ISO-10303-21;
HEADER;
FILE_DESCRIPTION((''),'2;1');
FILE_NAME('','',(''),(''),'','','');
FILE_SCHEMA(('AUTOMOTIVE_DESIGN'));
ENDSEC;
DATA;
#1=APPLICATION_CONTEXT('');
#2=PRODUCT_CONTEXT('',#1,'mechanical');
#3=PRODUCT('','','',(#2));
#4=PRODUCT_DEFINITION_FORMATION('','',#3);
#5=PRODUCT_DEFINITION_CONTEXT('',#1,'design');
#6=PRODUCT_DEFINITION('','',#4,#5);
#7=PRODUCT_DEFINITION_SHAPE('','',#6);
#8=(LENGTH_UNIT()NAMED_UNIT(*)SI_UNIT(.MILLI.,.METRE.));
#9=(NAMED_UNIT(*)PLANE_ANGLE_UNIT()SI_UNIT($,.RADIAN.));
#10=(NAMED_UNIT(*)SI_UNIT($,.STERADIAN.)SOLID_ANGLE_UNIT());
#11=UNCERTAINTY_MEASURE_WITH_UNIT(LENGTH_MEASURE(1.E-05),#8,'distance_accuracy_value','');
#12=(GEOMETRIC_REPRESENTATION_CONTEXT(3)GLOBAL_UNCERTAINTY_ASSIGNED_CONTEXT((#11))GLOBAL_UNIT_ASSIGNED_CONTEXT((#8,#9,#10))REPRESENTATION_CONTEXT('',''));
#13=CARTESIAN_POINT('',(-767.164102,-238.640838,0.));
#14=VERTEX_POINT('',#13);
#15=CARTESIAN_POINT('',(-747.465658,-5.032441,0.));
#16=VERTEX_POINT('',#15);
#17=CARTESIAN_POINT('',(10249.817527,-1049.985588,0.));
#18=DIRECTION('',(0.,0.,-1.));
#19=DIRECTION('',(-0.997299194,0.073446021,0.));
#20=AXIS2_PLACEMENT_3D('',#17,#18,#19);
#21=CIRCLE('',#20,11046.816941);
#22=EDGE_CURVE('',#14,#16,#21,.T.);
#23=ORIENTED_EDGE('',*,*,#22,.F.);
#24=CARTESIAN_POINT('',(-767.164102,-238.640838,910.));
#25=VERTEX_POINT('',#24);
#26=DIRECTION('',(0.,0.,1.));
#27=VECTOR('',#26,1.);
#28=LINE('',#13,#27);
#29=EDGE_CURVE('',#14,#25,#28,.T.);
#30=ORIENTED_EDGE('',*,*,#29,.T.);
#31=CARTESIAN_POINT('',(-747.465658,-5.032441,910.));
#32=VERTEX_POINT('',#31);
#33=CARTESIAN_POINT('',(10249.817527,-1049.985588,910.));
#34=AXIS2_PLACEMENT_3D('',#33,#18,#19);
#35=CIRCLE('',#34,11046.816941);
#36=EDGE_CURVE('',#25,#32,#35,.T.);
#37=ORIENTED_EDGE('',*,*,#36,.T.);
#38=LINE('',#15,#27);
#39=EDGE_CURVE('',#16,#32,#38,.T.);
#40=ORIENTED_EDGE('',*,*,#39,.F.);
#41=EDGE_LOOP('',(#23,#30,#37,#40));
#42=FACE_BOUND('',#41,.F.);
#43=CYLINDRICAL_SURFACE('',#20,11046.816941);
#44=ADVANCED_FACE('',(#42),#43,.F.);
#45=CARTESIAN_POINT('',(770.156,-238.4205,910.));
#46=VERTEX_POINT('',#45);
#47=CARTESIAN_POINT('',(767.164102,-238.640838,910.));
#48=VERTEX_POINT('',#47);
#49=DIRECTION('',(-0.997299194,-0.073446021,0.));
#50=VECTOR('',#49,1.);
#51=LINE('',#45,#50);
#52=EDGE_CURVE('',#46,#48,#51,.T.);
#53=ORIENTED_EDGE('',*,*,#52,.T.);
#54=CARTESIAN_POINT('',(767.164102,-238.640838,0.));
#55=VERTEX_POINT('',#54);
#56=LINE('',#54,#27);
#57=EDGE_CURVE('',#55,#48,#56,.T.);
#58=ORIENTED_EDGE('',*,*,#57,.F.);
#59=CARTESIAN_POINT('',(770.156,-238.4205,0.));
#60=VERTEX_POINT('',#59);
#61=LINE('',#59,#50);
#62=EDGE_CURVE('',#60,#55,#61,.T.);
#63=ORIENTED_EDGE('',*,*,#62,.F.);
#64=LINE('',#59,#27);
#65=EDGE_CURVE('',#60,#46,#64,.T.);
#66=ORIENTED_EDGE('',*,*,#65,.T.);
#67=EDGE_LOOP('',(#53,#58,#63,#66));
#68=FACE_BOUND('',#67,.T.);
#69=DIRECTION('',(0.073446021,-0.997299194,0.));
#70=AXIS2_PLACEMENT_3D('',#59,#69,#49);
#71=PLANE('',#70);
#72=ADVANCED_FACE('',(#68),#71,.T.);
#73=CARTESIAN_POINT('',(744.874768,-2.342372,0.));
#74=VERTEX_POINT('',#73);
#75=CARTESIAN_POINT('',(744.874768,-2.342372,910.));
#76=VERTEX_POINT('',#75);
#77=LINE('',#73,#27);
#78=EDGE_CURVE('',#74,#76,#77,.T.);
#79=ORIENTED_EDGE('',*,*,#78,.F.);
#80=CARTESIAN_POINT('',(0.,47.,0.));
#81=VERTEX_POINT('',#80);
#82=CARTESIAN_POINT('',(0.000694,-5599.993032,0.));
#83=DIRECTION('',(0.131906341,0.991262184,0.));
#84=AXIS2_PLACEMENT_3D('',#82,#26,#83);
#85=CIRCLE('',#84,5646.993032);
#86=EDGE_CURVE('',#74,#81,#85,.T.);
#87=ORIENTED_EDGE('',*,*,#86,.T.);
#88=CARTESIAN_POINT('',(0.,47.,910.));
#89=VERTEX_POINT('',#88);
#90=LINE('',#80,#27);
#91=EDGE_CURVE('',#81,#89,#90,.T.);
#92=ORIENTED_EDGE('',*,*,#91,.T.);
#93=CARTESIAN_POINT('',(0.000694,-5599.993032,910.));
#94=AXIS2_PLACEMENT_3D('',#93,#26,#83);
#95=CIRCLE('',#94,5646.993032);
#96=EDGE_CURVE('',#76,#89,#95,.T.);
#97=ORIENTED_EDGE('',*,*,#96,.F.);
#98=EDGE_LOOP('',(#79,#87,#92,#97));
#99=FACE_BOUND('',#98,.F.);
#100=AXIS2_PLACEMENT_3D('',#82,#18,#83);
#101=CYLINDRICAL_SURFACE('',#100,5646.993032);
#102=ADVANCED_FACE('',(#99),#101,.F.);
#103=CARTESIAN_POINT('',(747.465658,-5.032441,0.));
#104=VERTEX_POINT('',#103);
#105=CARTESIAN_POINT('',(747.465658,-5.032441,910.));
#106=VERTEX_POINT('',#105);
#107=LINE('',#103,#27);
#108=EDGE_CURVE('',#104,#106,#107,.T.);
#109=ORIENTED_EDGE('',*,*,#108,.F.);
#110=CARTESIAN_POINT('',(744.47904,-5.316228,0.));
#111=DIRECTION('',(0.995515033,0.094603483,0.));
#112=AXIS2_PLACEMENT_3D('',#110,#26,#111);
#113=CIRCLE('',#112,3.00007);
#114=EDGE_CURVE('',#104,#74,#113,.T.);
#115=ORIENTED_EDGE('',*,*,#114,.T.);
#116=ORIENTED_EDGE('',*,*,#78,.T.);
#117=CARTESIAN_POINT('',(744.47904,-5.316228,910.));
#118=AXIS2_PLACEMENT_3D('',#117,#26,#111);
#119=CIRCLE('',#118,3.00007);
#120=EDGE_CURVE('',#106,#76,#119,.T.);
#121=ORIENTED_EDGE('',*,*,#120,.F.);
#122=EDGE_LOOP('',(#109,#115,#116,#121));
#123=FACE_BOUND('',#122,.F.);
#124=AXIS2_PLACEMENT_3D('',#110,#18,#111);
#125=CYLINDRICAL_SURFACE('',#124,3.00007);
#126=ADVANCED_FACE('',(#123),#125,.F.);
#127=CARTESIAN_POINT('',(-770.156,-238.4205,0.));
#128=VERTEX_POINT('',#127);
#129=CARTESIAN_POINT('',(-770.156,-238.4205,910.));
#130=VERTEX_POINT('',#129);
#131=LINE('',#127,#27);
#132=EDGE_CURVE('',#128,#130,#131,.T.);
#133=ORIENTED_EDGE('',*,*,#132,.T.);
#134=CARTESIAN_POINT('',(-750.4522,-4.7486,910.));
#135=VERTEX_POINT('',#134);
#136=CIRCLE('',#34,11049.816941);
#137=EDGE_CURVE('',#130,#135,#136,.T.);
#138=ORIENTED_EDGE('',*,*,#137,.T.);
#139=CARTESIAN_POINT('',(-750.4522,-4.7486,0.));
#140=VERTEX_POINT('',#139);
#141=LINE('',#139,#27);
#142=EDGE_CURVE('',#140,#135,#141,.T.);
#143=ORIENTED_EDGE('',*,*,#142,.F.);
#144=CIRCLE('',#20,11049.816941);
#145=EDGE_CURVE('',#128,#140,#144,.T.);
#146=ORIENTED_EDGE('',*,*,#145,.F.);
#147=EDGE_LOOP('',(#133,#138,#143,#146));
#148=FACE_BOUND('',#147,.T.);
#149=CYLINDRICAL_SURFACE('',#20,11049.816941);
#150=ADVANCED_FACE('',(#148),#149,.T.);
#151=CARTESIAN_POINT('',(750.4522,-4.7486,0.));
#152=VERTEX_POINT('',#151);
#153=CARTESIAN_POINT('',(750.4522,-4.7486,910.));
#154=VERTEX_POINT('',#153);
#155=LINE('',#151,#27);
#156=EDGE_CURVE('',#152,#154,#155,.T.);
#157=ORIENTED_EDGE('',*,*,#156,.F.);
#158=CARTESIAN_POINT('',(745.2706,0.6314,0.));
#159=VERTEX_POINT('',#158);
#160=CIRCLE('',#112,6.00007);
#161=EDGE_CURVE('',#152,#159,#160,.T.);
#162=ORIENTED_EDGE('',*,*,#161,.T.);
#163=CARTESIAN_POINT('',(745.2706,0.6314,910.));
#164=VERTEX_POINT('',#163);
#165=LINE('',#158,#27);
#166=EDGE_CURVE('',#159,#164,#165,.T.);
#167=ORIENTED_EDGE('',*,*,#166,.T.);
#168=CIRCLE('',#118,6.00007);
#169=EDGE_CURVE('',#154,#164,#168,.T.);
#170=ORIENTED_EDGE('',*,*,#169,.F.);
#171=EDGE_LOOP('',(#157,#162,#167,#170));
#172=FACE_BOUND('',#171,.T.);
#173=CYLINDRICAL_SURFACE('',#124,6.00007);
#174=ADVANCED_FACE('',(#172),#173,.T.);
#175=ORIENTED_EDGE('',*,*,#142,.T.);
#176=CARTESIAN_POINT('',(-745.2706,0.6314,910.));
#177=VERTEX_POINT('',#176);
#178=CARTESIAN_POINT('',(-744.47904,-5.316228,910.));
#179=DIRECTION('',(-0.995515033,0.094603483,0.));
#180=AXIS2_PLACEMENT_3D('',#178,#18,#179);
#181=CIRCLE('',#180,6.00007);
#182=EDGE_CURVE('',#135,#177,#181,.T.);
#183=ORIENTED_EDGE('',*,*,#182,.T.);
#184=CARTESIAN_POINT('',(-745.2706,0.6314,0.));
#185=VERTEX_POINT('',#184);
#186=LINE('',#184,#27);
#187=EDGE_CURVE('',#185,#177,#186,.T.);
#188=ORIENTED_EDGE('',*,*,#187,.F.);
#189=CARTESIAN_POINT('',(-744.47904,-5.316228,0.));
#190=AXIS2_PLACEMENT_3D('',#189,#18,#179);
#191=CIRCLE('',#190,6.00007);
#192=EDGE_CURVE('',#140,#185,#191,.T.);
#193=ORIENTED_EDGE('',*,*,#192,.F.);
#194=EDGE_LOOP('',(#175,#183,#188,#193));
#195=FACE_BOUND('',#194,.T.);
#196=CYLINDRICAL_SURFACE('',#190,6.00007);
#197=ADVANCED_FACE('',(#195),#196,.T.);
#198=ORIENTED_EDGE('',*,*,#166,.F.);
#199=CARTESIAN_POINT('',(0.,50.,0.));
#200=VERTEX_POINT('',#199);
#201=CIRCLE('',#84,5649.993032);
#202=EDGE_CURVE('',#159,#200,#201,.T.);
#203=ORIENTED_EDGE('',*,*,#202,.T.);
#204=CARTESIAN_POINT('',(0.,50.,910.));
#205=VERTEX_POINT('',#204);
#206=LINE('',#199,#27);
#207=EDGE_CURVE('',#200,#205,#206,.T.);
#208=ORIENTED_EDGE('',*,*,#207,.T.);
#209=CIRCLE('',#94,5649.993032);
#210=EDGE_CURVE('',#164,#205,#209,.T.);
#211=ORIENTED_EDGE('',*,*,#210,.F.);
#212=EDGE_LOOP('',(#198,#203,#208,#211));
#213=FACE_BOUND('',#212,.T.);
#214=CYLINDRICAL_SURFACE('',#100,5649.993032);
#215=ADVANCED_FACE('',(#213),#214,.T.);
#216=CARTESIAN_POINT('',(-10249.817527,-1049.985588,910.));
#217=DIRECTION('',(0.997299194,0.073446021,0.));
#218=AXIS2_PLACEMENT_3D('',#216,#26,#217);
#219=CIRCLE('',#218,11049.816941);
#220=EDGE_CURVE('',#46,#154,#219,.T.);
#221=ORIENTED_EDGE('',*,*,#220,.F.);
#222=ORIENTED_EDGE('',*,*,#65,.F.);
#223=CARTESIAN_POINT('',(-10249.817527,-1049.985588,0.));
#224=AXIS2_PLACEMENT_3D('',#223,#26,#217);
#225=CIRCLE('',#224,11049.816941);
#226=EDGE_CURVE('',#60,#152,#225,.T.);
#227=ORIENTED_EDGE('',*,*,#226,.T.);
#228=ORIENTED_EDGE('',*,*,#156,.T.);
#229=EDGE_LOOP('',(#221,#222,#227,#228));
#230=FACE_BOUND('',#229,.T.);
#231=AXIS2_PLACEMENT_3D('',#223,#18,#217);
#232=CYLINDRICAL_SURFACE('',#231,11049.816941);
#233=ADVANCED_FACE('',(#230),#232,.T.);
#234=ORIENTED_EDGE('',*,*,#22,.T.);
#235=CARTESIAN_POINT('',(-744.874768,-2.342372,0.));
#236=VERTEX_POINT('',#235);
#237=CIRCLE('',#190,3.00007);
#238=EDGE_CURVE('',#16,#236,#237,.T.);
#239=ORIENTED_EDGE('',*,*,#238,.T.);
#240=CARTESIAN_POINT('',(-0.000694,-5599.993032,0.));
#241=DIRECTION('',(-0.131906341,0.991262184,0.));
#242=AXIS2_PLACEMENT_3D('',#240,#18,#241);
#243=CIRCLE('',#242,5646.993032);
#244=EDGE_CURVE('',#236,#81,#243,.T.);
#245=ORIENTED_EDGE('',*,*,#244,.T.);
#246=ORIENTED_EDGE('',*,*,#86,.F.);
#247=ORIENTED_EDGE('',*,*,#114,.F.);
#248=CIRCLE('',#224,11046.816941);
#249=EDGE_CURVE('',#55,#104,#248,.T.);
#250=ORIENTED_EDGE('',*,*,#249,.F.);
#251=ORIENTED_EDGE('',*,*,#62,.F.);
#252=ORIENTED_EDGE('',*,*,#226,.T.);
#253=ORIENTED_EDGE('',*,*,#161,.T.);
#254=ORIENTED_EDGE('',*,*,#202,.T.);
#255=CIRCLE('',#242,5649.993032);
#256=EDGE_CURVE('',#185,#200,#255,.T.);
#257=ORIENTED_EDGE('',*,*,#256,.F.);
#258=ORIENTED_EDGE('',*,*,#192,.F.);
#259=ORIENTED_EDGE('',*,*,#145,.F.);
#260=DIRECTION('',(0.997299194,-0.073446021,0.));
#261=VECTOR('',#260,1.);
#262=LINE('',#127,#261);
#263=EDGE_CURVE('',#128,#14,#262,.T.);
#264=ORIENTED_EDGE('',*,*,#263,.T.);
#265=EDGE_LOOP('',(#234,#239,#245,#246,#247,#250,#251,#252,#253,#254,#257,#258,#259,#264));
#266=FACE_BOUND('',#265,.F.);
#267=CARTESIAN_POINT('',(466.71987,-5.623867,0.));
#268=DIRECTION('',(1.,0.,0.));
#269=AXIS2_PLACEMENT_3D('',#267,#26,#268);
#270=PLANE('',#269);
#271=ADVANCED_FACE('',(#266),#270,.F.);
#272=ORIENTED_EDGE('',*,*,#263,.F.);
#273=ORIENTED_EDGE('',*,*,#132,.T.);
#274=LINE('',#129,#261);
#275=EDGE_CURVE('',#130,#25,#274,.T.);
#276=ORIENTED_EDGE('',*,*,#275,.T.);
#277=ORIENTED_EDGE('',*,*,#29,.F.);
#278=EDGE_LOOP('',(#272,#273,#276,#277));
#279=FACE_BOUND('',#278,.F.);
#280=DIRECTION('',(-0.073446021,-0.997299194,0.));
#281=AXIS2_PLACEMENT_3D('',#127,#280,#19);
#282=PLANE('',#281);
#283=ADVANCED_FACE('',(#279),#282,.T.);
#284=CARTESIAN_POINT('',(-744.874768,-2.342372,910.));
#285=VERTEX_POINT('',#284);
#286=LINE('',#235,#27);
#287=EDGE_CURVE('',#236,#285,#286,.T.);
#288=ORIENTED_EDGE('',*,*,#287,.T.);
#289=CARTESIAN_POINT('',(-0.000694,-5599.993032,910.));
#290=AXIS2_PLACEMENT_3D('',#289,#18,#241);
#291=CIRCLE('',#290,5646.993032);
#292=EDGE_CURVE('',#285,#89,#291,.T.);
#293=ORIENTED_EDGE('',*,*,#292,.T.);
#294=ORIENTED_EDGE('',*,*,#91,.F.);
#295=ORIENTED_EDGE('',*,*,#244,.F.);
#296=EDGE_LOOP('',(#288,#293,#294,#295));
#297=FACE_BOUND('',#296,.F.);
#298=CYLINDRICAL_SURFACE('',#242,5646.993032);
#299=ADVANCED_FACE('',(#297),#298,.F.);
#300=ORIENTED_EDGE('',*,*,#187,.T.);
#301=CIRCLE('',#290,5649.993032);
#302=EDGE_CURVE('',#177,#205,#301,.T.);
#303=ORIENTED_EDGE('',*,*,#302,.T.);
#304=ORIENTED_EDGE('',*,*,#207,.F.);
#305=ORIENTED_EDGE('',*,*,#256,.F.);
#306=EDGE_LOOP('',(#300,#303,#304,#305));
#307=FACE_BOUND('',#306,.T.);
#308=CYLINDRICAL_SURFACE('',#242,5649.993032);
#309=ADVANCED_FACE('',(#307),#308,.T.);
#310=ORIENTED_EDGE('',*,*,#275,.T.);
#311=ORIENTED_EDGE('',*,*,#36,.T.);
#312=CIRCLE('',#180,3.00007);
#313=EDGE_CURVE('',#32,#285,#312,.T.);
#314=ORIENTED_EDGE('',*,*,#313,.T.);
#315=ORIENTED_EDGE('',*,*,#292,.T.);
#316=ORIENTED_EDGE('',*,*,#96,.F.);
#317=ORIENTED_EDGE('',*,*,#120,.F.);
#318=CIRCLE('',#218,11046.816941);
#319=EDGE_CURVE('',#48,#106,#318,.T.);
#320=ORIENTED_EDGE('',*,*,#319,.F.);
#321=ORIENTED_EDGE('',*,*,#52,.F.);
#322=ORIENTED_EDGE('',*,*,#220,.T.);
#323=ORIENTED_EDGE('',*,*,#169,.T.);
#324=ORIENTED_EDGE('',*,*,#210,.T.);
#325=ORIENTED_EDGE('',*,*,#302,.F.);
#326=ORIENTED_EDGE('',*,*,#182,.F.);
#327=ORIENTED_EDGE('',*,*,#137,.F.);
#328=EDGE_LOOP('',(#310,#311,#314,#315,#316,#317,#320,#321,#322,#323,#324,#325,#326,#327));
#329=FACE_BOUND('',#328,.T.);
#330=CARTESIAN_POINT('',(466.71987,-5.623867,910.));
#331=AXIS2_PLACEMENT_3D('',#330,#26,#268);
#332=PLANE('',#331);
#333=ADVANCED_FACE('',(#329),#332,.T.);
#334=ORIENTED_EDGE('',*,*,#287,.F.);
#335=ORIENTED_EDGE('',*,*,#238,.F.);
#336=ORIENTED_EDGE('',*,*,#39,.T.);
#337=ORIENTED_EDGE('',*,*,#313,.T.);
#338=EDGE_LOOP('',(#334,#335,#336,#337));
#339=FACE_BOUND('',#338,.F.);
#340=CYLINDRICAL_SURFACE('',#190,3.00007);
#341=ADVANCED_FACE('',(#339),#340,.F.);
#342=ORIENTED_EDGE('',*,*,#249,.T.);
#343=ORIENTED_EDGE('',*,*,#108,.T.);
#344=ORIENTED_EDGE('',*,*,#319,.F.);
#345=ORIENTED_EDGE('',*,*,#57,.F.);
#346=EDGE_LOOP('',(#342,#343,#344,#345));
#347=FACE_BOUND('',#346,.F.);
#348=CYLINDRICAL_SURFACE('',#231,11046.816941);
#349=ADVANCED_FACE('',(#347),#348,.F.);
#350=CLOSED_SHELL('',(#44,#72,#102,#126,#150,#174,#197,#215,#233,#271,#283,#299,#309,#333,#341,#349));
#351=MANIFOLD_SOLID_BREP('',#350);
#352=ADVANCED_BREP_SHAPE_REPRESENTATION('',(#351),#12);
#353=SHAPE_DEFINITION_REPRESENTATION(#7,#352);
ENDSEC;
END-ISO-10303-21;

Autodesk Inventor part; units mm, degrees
ref_plane "YZ Plane" through (0, 0, 0) normal (1, 0, 0) x (0, 1, 0)
ref_plane "XZ Plane" through (0, 0, 0) normal (0, 1, 0) x (-1, 0, 0)
ref_plane "XY Plane" through (0, 0, 0) normal (0, 0, 1) x (1, 0, 0)
sketch "Sketch1" plane through (0, 0, 0) normal (0, 0, 1) x (1, 0, 0)
  line L0 (-750, 0) -> (750, 0) construction
  line L1 (750, 0) -> (750, -2700) construction
  line L2 (750, -2700) -> (-750, -2700) construction
  line L3 (-750, -2700) -> (-750, 0) construction
  line L4 (800, 50) -> (-800, 50) construction
  line L5 (-800, 50) -> (-800, -2750) construction
  line L6 (-800, -2750) -> (800, -2750) construction
  line L7 (800, -2750) -> (800, 50) construction
  line L8 (-850, 100) -> (850, 100) construction
  line L9 (850, 100) -> (850, -2800) construction
  line L10 (850, -2800) -> (-850, -2800) construction
  line L11 (-850, -2800) -> (-850, 100) construction
  arc A0 (750, 0) -> (745.2706, 0.6314) centre (0, -5600) ccw construction
  line L12 (-750, -2100) -> (750, -2100) construction
  line L13 (114.1118, -2698.3696) -> (750, -2100) construction
  arc A1 (750, -2100) -> (770.156, -238.4205) centre (-10250, -1050) ccw construction
  line L14 (750, 0) -> (749.6018, -2.9735) construction
  arc A2 (750, -3.0268) -> (0, 47) centre (-0.2, -5603) ccw construction
  line L15 (750, 0) -> (747.0136, -0.2851) construction
  arc A3 (767.1641, -238.6409) -> (747.4657, -5.0326) centre (-10252.9895, -1050.2527) ccw construction
  arc A4 (750.4522, -4.7486) -> (745.2706, 0.6314) centre (744.4791, -5.3162) ccw
  arc A5 (747.4657, -5.0326) -> (744.8748, -2.3426) centre (744.4792, -5.3164) ccw construction
  line L16 (750, -2100) -> (752.9864, -2100.2851) construction
  arc A6 (752.9864, -2100.2851) -> (771.2831, -213.263) centre (-10246.9891, -1050.0292) ccw construction
  line L17 (750, -2100) -> (752.0559, -2102.1848) construction
  line L18 (752.0559, -2102.1848) -> (752.0559, -2102.1848) construction
  arc A7 (749.1768, -2100.7746) -> (750.1074, -2098.8746) centre (747.1209, -2098.5898) ccw construction
  line L19 (0, -2697) -> (110, -2697) construction
  line L20 (112.0559, -2696.1848) -> (685.3133, -2156.7506) construction
  arc A8 (110, -2700) -> (114.1118, -2698.3696) centre (110, -2694) ccw construction
  arc A9 (110, -2697) -> (112.0559, -2696.1848) centre (110, -2694) ccw construction
  line L21 (685.3133, -2156.7506) -> (687.3692, -2158.9354) construction
  line L22 (752.0559, -2102.1848) -> (671.2185, -2178.2526) construction
  line L23 (671.2185, -2178.2526) -> (669.1626, -2176.0678) construction
  arc A10 (747.4657, -5.0326) -> (747.0136, -0.2851) centre (-10252.9895, -1050.2527) ccw construction
  arc A11 (745.2706, 0.6314) -> (0, 50) centre (0, -5600) ccw
  arc A12 (750.4522, -4.7486) -> (750, 0) centre (-10250, -1050) ccw construction
  line L24 (770.156, -238.4205) -> (767.1641, -238.6409) construction
  line L25 (768.2917, -213.4901) -> (771.2831, -213.263) construction
  arc A13 (770.156, -238.4205) -> (750.4522, -4.7486) centre (-10250, -1050) ccw
  line L26 (0, 100) -> (0, 50) construction
  line L27 (0, -2700) -> (0, -2697) construction
  line L28 (0, 47) -> (0, 0) construction
  line L29 (0, 50) -> (0, 47) construction
  arc A14 (752.0559, -2102.1848) -> (752.9864, -2100.2851) centre (749.9998, -2099.9999) ccw construction
  point P0 (0, -2750)
  dimension "d54" = 1500
  dimension "d55" = 2700
  dimension "d58" = 2100
  dimension "d68" = 6
  dimension "d70" = 3
  dimension "d75" = 3
  dimension "d83" = 6
  dimension "d86" = 3
  dimension "d112" = 239.271
  dimension "d113" = 50
  dimension "d114" = 50
  dimension "d115" = 3
  dimension "d117" = 110
  dimension "d118" = 25
  dimension "d119" = 111
  dimension "d120" = 25
contour flange "Contour Flange2" sketch "Sketch1" thickness 3 bend radius 3 width 910 along (0, 0, 1) mid plane no both sides no wall seen from (760.924, -121.5323, 0) lies toward (-0.9964637, -0.0840242, 0) curves A13 A4 A11
bend "Bend2"
corner "Corner2"
mirror "Mirror2" about plane through (0, 0, 0) normal (1, 0, 0)
equation "\"d36\" = Thickness"
equation "\"d37\" = BendReliefWidth"
equation "\"d38\" = BendReliefDepth"
equation "\"d39\" = MinimumRemnant"
equation "\"d40\" = TransitionRadius"
equation "\"d42\" = BendRadius"
equation "\"d44\" = CornerReliefSize"
equation "\"d45\" = GapSize"
equation "\"d46\" = JacobiRadiusSize"
equation "\"BendRadius\" = Thickness"
equation "\"BendReliefWidth\" = Thickness"
equation "\"BendReliefDepth\" = 0.5 * Thickness"
equation "\"CornerReliefSize\" = 4 * Thickness"
equation "\"MinimumRemnant\" = 2 * Thickness"
equation "\"TransitionRadius\" = BendRadius"
equation "\"JacobiRadiusSize\" = BendRadius"
equation "\"GapSize\" = Thickness"
equation "\"Thickness\" = 3"
properties part number "МОО 031 лист спина-бедро" material "Stainless Steel AISI 304"
